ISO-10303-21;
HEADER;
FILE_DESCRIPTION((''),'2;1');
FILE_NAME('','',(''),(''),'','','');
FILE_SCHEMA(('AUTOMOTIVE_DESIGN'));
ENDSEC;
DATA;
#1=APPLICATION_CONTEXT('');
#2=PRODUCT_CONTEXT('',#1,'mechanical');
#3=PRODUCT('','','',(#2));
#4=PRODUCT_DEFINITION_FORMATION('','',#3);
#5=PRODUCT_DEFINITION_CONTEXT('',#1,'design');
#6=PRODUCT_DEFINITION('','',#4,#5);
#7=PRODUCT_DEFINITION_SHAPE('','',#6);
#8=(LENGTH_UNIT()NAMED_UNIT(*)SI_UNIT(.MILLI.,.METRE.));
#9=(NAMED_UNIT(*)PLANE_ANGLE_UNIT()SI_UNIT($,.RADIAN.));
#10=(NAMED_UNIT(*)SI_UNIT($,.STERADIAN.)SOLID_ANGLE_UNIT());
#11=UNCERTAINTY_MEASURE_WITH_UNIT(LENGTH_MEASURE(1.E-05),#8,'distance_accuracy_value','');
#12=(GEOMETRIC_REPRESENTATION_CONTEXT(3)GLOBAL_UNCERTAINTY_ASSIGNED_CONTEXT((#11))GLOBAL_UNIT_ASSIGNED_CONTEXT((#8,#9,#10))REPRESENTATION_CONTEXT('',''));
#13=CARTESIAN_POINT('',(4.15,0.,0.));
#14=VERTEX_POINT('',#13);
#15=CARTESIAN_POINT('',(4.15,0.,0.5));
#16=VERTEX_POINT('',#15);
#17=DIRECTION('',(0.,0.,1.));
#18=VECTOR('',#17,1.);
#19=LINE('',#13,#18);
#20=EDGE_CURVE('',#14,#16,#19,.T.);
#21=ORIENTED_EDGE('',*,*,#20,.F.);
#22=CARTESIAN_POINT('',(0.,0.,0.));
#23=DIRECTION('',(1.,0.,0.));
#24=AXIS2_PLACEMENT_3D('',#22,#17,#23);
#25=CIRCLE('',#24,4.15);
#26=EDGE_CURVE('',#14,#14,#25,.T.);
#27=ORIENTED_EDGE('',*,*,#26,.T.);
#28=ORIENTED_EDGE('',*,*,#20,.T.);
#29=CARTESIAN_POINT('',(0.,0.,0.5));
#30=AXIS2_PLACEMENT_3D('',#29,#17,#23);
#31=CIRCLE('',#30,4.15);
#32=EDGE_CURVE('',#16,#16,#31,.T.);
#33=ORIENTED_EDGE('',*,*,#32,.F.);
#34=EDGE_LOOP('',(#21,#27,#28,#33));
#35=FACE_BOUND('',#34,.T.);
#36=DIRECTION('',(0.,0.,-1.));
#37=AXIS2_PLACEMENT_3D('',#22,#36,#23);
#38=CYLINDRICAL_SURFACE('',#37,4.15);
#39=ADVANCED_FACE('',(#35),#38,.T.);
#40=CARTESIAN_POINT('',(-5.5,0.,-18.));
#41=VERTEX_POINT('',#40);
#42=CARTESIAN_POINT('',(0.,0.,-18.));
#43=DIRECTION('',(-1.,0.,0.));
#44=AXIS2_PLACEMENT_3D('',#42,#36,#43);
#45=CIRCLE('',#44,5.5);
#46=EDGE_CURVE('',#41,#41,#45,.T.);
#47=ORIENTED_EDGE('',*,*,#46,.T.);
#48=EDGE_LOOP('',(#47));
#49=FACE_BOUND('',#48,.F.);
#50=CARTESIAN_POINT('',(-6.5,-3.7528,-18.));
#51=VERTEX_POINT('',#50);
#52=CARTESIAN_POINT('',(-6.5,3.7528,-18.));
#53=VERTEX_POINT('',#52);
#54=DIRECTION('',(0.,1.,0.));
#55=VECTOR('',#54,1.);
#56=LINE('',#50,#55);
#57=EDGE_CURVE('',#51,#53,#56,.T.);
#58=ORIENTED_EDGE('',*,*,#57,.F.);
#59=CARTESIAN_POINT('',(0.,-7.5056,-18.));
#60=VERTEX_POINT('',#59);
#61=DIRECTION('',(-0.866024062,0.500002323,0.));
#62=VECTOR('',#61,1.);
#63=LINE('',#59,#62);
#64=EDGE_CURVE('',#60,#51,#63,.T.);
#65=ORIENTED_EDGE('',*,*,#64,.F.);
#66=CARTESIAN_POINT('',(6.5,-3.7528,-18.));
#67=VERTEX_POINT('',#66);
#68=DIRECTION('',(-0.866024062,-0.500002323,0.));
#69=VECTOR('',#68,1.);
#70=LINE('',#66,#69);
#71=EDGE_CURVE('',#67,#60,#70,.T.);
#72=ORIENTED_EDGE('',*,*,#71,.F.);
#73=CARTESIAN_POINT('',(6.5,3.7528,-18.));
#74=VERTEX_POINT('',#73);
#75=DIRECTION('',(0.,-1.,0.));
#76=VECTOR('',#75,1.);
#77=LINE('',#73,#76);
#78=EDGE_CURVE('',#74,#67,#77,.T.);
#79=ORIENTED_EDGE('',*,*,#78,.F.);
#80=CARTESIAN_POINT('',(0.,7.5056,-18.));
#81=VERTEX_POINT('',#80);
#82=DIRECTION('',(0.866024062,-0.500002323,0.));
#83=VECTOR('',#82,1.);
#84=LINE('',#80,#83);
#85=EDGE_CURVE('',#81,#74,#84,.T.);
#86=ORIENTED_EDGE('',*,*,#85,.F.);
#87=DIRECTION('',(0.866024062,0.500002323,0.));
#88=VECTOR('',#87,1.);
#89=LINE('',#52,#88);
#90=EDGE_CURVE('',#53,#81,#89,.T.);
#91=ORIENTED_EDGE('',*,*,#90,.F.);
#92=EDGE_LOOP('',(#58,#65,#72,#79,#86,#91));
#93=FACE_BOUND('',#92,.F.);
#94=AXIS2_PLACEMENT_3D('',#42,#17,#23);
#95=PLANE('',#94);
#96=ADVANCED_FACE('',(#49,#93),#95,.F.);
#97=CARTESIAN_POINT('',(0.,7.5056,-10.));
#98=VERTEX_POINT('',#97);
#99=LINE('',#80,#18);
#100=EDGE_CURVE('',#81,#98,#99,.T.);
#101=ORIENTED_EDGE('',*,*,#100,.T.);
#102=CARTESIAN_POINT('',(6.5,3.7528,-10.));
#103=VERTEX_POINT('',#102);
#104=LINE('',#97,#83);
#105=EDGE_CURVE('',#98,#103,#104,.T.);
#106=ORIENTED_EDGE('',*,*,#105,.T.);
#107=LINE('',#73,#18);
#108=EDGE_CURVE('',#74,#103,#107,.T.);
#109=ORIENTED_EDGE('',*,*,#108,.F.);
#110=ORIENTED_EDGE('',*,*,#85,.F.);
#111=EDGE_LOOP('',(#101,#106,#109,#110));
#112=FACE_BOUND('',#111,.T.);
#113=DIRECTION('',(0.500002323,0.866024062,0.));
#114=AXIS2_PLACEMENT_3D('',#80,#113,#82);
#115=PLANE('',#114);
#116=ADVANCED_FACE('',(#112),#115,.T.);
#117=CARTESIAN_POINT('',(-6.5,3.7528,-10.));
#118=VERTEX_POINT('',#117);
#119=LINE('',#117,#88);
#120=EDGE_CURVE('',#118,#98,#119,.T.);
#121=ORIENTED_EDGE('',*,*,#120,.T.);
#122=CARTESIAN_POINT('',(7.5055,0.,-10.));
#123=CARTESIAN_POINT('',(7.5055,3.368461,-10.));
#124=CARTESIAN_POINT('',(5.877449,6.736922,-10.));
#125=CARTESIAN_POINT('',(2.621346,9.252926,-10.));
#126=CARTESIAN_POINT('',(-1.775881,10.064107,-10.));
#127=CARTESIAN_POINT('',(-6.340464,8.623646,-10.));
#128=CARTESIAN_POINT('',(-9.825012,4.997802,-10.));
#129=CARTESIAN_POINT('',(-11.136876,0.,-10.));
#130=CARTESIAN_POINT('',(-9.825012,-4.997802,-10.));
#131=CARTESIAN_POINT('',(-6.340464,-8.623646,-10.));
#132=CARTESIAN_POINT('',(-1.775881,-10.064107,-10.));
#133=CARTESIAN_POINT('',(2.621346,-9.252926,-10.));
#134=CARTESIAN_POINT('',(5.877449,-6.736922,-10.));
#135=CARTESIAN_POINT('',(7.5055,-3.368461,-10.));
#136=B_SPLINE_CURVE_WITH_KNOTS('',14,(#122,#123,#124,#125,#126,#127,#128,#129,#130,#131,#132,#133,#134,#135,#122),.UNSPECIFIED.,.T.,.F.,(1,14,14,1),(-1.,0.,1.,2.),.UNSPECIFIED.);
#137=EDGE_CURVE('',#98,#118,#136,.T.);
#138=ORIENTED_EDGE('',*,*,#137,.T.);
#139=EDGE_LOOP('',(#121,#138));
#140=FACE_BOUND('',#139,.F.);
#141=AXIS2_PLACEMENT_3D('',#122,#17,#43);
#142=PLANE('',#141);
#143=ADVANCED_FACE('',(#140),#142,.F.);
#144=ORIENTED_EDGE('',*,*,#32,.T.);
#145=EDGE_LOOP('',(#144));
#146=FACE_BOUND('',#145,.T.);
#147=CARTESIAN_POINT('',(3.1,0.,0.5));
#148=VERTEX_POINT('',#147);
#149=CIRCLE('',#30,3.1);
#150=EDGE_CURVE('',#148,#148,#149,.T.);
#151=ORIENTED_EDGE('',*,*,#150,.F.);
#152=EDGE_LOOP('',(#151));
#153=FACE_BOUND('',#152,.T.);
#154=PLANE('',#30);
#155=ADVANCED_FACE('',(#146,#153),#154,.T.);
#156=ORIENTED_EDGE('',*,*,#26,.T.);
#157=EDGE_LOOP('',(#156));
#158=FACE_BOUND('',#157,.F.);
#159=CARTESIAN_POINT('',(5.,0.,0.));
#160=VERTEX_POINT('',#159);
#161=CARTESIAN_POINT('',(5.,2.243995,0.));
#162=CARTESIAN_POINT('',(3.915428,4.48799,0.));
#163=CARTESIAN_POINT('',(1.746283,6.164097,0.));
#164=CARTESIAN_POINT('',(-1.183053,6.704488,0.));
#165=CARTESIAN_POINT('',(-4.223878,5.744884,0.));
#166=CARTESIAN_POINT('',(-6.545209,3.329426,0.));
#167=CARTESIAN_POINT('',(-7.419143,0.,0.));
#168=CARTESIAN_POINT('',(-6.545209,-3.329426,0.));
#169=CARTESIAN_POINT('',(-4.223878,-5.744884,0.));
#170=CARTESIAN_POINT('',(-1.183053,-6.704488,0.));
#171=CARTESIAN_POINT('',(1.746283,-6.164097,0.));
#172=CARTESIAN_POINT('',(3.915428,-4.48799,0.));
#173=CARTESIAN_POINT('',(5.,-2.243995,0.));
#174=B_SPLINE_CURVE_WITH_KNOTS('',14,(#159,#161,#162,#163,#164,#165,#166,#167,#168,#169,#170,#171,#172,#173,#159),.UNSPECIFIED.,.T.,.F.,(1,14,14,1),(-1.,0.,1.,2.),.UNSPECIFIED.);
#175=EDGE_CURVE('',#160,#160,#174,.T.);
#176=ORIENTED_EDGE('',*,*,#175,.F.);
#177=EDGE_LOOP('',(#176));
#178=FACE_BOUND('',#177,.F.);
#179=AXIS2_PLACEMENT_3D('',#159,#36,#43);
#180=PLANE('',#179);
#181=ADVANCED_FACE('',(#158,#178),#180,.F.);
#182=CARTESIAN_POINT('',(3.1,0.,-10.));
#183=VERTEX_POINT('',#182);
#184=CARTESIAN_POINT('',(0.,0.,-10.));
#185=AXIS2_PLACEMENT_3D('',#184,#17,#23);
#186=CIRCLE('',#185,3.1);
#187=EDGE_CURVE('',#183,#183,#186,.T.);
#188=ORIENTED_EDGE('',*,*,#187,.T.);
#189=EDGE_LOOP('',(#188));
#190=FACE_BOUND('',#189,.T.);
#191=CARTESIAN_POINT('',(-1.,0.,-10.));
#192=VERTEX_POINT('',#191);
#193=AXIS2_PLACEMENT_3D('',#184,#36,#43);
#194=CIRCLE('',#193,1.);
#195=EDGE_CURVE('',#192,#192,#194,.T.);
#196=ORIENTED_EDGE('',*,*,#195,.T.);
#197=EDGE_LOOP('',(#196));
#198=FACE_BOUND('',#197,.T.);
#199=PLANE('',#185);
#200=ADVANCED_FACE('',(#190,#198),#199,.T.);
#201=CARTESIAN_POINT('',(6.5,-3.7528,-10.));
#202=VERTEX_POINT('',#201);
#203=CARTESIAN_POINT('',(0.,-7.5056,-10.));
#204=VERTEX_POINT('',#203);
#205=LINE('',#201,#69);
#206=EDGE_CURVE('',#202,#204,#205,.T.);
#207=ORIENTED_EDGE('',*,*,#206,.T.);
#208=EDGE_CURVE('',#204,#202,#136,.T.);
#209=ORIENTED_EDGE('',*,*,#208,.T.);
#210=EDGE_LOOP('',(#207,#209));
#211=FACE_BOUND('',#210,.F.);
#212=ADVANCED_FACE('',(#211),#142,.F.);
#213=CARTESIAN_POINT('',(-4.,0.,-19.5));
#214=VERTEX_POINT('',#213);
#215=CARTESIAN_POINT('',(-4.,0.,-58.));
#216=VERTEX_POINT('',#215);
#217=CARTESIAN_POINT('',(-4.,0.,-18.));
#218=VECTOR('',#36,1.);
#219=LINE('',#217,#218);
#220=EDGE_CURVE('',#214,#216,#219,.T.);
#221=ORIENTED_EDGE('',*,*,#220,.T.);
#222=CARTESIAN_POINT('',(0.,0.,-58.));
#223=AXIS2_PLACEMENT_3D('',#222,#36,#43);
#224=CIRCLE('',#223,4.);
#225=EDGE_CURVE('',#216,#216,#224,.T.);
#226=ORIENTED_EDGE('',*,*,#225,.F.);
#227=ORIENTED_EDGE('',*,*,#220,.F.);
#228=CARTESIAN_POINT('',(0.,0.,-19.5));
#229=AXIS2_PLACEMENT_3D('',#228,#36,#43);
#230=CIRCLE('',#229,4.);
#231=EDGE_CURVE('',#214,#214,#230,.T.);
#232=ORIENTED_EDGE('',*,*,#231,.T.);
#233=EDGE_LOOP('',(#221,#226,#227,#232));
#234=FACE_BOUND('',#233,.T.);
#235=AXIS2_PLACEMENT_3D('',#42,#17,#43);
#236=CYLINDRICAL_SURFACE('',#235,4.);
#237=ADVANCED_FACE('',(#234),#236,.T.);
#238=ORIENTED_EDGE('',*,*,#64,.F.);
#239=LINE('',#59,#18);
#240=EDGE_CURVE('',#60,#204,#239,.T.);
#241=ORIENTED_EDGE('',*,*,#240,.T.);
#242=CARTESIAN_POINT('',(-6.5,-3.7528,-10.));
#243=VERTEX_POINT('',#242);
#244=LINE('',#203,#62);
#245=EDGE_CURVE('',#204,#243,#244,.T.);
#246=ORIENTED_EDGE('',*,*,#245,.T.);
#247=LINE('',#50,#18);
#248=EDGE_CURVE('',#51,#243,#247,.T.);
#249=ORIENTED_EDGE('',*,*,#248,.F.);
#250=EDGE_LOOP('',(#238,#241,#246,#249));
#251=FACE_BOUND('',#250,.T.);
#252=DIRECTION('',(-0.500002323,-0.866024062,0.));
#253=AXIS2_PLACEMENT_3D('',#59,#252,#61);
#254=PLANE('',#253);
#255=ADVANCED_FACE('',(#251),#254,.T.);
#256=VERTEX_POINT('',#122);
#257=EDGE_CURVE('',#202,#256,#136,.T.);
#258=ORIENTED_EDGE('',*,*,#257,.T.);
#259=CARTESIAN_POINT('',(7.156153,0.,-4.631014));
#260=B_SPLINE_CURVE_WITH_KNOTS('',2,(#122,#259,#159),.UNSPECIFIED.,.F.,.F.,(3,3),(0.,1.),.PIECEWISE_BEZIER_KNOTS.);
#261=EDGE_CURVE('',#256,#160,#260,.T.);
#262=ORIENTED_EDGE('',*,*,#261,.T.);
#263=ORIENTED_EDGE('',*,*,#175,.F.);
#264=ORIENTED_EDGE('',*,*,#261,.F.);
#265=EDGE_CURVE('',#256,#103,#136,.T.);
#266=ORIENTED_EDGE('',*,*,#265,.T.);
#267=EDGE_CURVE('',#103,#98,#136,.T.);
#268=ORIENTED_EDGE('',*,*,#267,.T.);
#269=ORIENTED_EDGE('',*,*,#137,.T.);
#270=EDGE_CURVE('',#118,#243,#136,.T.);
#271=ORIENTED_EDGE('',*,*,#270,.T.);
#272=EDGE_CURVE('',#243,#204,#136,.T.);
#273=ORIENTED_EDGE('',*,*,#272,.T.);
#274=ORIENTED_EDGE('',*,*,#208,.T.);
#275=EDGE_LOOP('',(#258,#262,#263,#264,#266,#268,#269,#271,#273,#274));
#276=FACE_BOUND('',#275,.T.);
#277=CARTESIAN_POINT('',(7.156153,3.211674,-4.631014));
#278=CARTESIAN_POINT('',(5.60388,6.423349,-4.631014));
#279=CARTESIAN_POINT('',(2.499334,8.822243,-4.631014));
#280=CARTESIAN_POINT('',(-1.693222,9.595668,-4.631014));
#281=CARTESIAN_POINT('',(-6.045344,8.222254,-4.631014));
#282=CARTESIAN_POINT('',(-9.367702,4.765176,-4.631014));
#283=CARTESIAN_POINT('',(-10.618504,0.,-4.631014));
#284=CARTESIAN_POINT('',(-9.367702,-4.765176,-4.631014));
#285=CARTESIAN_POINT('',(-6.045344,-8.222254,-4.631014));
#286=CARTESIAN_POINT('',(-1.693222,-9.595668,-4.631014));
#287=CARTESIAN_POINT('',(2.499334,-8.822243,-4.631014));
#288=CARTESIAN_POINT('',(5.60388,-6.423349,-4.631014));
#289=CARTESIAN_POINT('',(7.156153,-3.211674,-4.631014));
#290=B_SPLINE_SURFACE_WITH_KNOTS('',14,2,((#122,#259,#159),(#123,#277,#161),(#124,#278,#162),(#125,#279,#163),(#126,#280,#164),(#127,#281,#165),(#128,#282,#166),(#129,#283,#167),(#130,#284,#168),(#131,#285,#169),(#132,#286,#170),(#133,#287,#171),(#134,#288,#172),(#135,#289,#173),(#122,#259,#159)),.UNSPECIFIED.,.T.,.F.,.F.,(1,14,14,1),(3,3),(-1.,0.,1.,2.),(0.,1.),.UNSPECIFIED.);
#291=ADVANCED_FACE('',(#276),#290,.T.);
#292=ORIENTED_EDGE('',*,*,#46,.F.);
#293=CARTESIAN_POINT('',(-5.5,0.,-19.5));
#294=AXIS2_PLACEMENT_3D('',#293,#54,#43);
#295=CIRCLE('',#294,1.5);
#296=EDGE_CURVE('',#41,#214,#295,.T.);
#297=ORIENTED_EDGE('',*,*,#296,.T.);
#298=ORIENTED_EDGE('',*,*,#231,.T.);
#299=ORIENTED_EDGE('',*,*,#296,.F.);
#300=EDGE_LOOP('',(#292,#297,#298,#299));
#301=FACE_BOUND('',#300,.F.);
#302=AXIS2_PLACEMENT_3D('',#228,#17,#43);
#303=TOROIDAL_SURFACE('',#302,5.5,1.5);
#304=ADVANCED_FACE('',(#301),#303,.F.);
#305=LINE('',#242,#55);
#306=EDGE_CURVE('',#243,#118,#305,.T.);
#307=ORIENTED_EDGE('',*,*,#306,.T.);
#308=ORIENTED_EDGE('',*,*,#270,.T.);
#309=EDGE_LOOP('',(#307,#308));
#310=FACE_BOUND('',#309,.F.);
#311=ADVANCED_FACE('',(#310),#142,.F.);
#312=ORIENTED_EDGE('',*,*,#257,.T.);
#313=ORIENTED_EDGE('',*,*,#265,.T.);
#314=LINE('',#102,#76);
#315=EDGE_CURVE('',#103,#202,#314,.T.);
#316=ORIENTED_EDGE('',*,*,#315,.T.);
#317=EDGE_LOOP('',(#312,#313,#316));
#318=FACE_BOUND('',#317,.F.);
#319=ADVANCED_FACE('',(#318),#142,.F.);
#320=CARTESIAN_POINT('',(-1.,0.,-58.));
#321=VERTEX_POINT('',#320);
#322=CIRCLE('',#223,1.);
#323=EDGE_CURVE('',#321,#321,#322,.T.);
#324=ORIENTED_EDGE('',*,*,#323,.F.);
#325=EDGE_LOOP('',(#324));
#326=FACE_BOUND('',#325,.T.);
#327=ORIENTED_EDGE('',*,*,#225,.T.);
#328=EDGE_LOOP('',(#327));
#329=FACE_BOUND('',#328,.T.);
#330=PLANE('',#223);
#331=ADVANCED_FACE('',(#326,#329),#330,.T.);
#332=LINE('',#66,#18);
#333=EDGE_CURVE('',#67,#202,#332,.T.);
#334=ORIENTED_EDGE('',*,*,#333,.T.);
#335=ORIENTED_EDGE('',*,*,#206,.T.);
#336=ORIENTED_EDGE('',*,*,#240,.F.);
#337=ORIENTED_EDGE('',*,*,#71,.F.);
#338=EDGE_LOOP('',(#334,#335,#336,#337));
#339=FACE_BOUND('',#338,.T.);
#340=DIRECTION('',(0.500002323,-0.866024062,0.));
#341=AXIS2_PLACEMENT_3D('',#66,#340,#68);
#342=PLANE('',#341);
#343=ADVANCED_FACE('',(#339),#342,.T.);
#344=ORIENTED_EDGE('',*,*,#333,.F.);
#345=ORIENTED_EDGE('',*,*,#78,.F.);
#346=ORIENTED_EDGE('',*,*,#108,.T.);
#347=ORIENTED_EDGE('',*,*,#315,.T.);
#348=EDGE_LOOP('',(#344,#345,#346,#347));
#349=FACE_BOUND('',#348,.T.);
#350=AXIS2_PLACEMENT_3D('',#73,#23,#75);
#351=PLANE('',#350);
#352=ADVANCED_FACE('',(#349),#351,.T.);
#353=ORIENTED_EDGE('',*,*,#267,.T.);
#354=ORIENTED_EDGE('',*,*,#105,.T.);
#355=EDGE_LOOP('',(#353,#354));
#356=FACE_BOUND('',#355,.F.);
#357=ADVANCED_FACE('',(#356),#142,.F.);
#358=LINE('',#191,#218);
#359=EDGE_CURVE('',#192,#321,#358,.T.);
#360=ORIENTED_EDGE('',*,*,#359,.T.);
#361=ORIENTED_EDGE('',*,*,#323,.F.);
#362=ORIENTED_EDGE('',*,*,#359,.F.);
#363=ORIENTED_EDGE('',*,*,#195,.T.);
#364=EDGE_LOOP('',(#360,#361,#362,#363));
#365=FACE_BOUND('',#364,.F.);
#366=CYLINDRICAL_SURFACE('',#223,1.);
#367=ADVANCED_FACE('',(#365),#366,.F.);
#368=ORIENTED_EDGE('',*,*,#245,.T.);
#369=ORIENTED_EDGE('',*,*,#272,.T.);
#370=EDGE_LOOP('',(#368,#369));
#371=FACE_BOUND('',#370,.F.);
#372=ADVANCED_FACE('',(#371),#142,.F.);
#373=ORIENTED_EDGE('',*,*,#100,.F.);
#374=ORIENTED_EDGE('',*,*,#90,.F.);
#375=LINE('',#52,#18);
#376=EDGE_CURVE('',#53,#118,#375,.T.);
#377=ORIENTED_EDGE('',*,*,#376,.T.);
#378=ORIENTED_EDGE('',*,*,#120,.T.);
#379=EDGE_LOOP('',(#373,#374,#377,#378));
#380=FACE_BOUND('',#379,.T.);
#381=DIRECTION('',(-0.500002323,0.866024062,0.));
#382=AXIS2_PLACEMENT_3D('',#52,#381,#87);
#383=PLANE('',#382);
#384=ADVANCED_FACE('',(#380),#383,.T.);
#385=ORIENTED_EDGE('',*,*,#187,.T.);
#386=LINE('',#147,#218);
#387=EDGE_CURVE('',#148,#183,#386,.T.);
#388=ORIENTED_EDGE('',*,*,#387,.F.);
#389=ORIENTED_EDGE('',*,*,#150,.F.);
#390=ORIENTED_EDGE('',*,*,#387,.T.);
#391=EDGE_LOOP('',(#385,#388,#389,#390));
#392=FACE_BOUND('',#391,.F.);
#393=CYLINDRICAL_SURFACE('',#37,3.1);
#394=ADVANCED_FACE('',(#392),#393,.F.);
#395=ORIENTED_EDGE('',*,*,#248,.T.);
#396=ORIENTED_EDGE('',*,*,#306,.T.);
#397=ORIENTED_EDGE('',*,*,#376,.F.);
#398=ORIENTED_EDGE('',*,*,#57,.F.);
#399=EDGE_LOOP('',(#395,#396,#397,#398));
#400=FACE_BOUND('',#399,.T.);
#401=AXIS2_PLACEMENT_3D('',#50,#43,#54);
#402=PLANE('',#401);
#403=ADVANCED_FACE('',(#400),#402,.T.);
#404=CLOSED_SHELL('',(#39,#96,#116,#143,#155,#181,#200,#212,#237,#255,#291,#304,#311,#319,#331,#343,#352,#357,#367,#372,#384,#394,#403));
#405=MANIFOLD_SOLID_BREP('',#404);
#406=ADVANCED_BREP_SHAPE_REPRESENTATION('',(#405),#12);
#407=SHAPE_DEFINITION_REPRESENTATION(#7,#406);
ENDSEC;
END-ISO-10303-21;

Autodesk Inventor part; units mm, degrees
ref_plane "YZ Plane" through (0, 0, 0) normal (1, 0, 0) x (0, 1, 0)
ref_plane "XZ Plane" through (0, 0, 0) normal (0, 1, 0) x (-1, 0, 0)
sketch "Sketch2" plane through (0, 0, 0) normal (0, 0, 1) x (1, 0, 0)
  circle A0 centre (0, 0) radius 5
  dimension "d1" = 10
sketch "Sketch3" plane through (0, 0, 0) normal (0, 0, 1) x (1, 0, 0)
  circle A0 centre (0, 0) radius 3.1
  dimension "d2" = 6.2
sketch "Sketch4" plane through (0, 0, 0) normal (0, 0, 1) x (1, 0, 0)
  circle A0 centre (0, 0) radius 4.15
  dimension "d3" = 8.3
ref_plane "Work Plane5" through (0, 0, -10) normal (0, 0, 1) x (1, 0, 0)
sketch "Sketch5" plane through (0, 0, -10) normal (0, 0, 1) x (1, 0, 0)
  circle A0 centre (0, 0) radius 7.5055
  dimension "d9" = 15.011
ref_plane "Work Plane3" through (0, 0, -5) normal (0, 0, 1) x (1, 0, 0)
sketch "Sketch6" plane through (0, 0, -5) normal (0, 0, 1) x (1, 0, 0)
  circle A0 centre (0, 0) radius 6.75
  dimension "d11" = 13.5
loft "Loft1" add profiles "Sketch5", "Sketch6", "Sketch2"
extrude "Extrusion2" add sketch "Sketch4" along normal blind 0.5
extrude "Extrusion3" cut sketch "Sketch3" along normal blind 0.5 and the other way blind 10
ref_plane "Work Plane4" through (0, 0, -18) normal (0, 0, 1) x (1, 0, 0)
sketch "Sketch8" plane through (0, 0, -18) normal (0, 0, 1) x (1, 0, 0)
  line L0 (0, 7.5056) -> (6.5, 3.7528)
  line L1 (6.5, 3.7528) -> (6.5, -3.7528)
  line L2 (6.5, -3.7528) -> (0, -7.5056)
  line L3 (0, -7.5056) -> (-6.5, -3.7528)
  line L4 (-6.5, -3.7528) -> (-6.5, 3.7528)
  line L5 (-6.5, 3.7528) -> (0, 7.5056)
  point P0 (0, 0)
  point P1 (0, 0)
  dimension "d27" = 13
extrude "Extrusion4" add sketch "Sketch8" along normal blind 8
sketch "Sketch9" plane through (0, 0, -18) normal (0, 0, -1) x (-1, 0, 0)
  circle A0 centre (0, 0) radius 4
  dimension "d30" = 8
extrude "Extrusion5" add sketch "Sketch9" along normal blind 40
sketch "Sketch10" plane through (0, 0, -58) normal (0, 0, -1) x (-1, 0, 0)
  circle A0 centre (0, 0) radius 4 projected
  circle A1 centre (0, 0) radius 1
  dimension "d33" = 2
extrude "Extrusion6" cut sketch "Sketch10" against normal blind 40 contours A1
sketch "Sketch11" plane through (0, 0, -18) normal (0, 0, -1) x (-1, 0, 0)
  circle A0 centre (0, 0) radius 4 projected
  circle A1 centre (0, 0) radius 1
  dimension "d36" = 2
extrude "Extrusion7" cut sketch "Sketch11" against normal blind 8 contours A1
thread "Thread1" size "M8x1.25" class "6g" standard "ISO Metric profile" length 38
fillet "Fillet1" radius 1.5 1 edges at (4, 0, -18)
properties part number "Adjustment screw"
